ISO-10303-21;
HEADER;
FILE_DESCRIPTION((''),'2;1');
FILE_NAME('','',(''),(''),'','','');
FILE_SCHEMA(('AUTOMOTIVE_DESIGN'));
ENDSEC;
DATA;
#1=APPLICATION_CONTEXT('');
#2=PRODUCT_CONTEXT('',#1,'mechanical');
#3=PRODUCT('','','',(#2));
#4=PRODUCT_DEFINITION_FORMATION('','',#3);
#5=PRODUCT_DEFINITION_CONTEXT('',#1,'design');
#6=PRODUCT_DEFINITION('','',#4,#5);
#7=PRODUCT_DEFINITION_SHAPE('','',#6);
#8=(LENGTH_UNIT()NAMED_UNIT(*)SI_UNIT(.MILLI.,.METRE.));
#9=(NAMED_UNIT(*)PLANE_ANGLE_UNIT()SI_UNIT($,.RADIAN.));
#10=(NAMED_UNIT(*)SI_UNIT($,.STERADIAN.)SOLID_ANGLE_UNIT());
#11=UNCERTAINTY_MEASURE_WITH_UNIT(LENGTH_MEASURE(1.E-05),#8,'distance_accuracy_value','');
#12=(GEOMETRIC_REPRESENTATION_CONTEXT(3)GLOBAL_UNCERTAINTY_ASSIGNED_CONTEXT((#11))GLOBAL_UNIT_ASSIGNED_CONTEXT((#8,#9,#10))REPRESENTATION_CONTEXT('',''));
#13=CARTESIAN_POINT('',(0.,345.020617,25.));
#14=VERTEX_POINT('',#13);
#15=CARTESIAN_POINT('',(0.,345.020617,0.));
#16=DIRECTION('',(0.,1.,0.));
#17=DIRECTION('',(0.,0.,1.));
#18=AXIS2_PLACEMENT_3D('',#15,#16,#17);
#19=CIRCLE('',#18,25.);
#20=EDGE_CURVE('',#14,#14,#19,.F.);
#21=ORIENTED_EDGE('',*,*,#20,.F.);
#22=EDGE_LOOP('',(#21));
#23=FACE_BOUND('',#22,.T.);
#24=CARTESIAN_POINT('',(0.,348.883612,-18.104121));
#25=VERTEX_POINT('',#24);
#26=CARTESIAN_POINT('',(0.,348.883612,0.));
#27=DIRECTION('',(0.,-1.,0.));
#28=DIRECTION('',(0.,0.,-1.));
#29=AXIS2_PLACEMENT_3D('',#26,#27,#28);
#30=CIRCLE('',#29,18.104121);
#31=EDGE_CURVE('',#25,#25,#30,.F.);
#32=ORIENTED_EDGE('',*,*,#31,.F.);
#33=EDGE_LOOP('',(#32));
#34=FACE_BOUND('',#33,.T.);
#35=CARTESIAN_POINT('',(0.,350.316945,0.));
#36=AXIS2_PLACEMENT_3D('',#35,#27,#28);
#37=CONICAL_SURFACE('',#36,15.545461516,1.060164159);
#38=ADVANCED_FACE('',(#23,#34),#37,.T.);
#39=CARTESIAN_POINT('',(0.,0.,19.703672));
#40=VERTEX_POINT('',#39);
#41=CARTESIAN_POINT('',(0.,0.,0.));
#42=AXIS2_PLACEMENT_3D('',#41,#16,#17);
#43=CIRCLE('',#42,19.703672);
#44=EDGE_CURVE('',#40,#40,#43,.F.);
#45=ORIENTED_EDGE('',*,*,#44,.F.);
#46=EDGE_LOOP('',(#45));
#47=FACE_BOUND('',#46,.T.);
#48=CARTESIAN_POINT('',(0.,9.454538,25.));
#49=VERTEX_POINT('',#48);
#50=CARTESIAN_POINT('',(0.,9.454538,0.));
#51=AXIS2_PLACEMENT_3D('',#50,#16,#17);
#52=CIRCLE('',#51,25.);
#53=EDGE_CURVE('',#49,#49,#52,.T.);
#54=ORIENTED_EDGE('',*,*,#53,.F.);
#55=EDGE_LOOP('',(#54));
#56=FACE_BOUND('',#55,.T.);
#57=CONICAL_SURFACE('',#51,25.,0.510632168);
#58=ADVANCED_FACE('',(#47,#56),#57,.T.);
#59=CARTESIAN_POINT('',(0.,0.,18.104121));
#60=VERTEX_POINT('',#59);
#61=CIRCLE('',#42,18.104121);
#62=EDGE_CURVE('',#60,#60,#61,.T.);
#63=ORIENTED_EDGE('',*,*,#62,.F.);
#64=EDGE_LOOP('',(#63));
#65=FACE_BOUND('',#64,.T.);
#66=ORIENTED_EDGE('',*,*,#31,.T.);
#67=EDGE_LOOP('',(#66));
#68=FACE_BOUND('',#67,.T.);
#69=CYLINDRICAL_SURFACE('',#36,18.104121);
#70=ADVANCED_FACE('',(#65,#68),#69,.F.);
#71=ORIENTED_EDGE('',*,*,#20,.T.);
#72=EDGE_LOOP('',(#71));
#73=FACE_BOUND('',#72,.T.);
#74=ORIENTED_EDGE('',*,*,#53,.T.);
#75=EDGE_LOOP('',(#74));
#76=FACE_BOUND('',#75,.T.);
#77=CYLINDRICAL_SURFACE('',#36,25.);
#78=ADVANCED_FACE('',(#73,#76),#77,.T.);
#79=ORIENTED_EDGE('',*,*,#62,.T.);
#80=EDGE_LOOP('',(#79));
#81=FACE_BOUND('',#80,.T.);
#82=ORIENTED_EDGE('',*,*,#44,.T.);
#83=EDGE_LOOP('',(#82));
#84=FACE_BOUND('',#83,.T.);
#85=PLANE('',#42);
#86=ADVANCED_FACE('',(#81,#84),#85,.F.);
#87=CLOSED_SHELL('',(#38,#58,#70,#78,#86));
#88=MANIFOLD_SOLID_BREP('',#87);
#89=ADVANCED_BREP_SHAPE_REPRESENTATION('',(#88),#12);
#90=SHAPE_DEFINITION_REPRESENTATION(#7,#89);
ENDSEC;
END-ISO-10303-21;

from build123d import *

# Parameters (mm, degrees)
SKETCH1_R           = 25
BOSS_EXTRUDE1_DEPTH = 350.316945
SKETCH2_R           = 18.104121469
CUT_EXTRUDE1_DEPTH  = 353.096523633
CHAMFER1_SIZE       = 5.296328
CHAMFER1_SIZE_2     = 9.454538


with BuildPart() as part:
    # Sketch1 → Boss-Extrude1 (new body)
    with BuildSketch(Plane(origin=(0, 0, 0), x_dir=(1, 0, 0), z_dir=(0, 1, 0))):
        with Locations(Location((0, 0, 0), (0, 0, 270))):
            Circle(SKETCH1_R)
    extrude(amount=BOSS_EXTRUDE1_DEPTH)

    # Sketch2 → Cut-Extrude1 (cut, through all)
    with BuildSketch(Plane(origin=(0, 0, 0), x_dir=(1, 0, 0), z_dir=(0, 1, 0))):
        with Locations(Location((0, 0, 0), (0, 0, 270))):
            Circle(SKETCH2_R)
    extrude(amount=CUT_EXTRUDE1_DEPTH, mode=Mode.SUBTRACT)

    # Chamfer1
    # the kernel refuses this chamfer: 9.454538, 5.296328 mm, written as the material it takes off along each edge
    with BuildSketch(Plane(origin=(0, 350.316945, 0), x_dir=(0, 0, 1), z_dir=(-1, 0, 0))) as chamfer1_piece_1:
        Polygon((25, -CHAMFER1_SIZE), (25 - CHAMFER1_SIZE_2, 0), (25, 0), align=None)
    revolve(axis=Axis((0, 350.316945, 0), (0, 1, 0)), mode=Mode.SUBTRACT)
    with BuildSketch(Plane(origin=(0, 0, 0), x_dir=(0, 0, 1), z_dir=(-1, 0, 0))) as chamfer1_piece_2:
        Polygon((25, CHAMFER1_SIZE_2), (25 - CHAMFER1_SIZE, 0), (25, 0), align=None)
    revolve(axis=Axis((0, 0, 0), (0, 1, 0)), mode=Mode.SUBTRACT)


solid = part.part
